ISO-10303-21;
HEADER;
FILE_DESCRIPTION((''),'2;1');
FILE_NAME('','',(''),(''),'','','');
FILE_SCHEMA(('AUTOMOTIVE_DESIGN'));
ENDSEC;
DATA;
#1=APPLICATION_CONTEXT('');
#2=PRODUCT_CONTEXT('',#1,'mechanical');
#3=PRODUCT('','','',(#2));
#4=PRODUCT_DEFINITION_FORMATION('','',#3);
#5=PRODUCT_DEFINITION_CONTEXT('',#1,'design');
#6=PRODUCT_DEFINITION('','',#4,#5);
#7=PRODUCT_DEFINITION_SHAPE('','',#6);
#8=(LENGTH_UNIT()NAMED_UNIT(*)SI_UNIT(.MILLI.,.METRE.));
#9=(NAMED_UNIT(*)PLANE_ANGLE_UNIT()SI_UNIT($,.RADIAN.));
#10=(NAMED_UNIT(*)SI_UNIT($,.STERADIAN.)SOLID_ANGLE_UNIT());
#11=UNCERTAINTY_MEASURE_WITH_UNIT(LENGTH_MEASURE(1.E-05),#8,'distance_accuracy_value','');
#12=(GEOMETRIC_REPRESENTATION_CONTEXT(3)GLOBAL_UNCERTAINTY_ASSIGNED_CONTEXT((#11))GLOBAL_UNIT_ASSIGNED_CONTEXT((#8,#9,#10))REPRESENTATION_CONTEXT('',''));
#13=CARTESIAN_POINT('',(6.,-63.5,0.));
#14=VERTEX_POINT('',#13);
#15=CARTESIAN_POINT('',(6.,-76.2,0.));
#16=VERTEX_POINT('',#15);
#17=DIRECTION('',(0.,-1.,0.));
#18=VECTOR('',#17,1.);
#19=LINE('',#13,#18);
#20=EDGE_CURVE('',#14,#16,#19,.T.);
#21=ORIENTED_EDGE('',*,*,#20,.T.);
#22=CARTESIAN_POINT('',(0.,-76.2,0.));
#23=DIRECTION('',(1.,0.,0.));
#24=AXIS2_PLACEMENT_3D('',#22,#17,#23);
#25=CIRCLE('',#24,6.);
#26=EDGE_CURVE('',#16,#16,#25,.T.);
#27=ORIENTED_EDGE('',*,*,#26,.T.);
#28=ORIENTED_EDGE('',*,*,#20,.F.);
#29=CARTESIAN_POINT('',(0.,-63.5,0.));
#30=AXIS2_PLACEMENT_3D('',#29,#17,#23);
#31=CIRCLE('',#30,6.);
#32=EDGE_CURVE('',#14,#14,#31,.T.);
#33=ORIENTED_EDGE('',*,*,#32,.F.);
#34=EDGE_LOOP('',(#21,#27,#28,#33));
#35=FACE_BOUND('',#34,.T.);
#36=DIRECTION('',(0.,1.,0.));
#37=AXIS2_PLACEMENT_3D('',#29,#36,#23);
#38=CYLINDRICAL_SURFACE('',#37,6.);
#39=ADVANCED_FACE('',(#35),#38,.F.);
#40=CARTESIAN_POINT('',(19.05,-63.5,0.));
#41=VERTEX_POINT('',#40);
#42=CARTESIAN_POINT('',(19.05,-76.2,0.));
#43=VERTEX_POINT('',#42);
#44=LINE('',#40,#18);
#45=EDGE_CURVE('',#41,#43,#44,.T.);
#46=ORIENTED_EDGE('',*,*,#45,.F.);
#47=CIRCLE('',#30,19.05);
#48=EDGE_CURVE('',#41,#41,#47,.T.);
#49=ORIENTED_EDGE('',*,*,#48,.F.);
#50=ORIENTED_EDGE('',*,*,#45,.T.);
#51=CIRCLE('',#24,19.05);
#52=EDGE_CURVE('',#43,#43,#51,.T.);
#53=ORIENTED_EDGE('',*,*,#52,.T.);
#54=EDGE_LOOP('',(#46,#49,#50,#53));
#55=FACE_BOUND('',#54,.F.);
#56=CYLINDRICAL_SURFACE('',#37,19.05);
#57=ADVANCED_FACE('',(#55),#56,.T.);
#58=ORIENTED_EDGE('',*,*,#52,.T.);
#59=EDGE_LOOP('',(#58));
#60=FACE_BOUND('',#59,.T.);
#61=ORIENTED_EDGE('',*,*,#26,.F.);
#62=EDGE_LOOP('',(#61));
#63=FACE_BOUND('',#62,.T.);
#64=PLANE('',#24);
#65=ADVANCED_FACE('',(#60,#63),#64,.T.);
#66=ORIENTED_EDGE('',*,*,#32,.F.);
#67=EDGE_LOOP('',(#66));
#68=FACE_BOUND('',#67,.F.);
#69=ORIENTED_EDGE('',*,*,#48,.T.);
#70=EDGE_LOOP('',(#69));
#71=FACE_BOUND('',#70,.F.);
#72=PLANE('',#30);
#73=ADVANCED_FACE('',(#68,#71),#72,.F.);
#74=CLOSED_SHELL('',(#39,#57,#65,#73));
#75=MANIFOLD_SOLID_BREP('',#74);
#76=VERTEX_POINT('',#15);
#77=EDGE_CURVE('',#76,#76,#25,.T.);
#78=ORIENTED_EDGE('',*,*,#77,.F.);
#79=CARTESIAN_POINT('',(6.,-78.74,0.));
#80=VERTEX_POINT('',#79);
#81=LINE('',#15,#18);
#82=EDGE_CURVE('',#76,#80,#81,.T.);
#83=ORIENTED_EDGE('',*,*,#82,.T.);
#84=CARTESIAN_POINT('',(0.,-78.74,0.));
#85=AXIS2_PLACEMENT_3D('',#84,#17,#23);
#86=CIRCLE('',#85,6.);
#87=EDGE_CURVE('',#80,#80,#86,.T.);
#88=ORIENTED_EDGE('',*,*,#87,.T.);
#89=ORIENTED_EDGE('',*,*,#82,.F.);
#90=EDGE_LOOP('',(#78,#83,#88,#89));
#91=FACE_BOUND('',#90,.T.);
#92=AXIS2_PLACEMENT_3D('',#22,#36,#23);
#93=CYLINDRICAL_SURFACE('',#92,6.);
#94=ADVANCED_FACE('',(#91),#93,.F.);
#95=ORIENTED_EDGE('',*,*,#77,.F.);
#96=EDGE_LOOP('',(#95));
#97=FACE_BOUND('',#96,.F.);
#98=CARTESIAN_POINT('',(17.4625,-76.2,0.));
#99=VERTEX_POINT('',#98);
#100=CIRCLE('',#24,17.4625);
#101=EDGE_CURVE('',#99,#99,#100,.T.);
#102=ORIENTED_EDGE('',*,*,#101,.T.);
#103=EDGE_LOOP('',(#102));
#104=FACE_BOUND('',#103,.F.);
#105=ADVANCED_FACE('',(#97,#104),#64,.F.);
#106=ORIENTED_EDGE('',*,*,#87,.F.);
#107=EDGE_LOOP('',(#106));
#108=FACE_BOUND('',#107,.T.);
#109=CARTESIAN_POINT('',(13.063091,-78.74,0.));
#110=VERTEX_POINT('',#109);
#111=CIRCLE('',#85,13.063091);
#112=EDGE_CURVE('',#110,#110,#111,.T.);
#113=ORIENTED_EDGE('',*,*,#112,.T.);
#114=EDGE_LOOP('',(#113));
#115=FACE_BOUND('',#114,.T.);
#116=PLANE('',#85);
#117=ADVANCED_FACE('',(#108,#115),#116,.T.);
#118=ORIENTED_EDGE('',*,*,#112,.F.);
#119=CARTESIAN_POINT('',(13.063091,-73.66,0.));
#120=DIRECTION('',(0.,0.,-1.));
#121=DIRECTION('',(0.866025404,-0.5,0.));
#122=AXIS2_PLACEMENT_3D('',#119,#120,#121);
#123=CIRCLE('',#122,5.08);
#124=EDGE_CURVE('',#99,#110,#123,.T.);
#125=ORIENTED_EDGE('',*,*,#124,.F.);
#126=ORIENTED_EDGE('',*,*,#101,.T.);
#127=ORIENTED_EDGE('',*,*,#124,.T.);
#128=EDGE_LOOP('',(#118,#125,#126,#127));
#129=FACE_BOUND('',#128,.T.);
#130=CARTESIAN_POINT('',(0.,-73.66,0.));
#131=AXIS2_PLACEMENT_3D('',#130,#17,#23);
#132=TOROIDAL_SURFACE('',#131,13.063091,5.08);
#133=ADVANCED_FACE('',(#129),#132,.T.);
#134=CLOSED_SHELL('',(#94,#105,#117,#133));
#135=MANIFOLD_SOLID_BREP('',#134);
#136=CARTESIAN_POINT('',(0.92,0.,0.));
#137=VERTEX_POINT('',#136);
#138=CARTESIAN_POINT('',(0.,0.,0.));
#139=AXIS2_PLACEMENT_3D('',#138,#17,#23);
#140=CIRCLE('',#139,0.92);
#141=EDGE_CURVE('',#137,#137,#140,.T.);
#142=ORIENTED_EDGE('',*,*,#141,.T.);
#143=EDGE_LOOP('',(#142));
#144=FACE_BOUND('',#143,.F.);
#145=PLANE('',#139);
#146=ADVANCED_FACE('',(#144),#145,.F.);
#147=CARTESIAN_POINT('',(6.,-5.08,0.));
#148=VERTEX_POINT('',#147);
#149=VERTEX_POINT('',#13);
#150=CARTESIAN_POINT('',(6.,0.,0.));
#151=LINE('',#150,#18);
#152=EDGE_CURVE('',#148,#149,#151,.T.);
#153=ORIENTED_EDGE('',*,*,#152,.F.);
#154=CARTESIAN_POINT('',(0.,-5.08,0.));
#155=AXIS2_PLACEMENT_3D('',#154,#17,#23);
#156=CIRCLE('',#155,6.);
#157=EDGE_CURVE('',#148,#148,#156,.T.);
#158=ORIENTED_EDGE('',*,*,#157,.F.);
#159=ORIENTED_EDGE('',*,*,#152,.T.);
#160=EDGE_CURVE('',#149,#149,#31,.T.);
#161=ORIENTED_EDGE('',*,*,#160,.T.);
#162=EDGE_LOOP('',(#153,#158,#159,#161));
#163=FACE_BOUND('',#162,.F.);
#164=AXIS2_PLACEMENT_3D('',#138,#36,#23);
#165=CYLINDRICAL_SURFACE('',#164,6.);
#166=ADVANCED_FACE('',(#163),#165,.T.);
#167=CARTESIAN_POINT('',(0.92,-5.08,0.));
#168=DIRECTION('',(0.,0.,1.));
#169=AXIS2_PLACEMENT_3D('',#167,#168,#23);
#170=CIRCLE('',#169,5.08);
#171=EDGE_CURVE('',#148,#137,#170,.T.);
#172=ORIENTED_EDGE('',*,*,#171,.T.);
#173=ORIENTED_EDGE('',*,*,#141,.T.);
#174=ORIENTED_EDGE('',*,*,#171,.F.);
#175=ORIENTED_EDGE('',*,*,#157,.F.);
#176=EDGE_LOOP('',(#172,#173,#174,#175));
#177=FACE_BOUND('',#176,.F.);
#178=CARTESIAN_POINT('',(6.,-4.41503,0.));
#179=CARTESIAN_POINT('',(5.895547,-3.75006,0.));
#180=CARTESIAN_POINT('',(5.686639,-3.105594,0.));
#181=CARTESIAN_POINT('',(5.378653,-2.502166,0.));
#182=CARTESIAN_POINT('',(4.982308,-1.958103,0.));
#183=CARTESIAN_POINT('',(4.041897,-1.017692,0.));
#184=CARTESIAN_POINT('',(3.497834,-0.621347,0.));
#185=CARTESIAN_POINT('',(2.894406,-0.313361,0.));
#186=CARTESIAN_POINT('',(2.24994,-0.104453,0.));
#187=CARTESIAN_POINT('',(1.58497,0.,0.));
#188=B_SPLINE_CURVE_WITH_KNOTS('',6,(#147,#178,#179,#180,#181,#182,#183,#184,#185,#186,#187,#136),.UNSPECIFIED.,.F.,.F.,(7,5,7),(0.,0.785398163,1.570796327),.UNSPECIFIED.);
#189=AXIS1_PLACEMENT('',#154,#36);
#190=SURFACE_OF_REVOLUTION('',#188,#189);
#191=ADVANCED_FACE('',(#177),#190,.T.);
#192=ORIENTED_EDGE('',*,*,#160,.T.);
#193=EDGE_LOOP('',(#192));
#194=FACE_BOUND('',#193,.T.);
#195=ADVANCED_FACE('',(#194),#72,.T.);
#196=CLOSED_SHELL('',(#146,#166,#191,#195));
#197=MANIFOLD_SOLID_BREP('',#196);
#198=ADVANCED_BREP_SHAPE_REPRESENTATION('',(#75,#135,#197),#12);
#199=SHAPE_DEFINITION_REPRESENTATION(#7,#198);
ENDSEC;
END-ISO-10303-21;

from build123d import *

# Parameters (mm, degrees)
F0_R     = 6
F1_DEPTH = 63.5
F2_R     = 19.05
F2_R_2   = 6
F3_DEPTH = 12.7
F4_R     = 17.4625
F4_R_2   = 6
F5_DEPTH = 2.54
F6_R     = 5.08


# Not quite as in the source:
# - a fillet or chamfer that OpenCascade refuses, or shapes differently, is made with other operations: its cross-section is extruded or revolved along the edge and cut away or added


with BuildPart() as f1:
    # F0 (on Front) → F1 (new body)
    with BuildSketch(Plane.XZ):
        Circle(F0_R)
    extrude(amount=F1_DEPTH)

    # F6
    f6_edges = [f1.edges().sort_by_distance(p)[0] for p in [
        (-6, 0, 0),
    ]]
    fillet(f6_edges, radius=F6_R)


with BuildPart() as f3:
    # F2 (on face) → F3 (new body)
    with BuildSketch(Plane.XZ.offset(63.5)):
        Circle(F2_R)
        Circle(F2_R_2, mode=Mode.SUBTRACT)
    extrude(amount=F3_DEPTH)


with BuildPart() as f5:
    # F4 (on face) → F5 (new body)
    with BuildSketch(Plane.XZ.offset(76.2)):
        Circle(F4_R)
        Circle(F4_R_2, mode=Mode.SUBTRACT)
    extrude(amount=F5_DEPTH)

    # F7: fillet of radius 5.08 on 1 edges, made by hand

    # F7_s1 → F7_t2 (revolve, cut)
    with BuildSketch(Plane.XY):
        with BuildLine():
            ThreePointArc((17.4625, -76.2), (15.6030909488, -78.0594090512), (13.0630909488, -78.74))
            Line((13.0630909488, -78.74), (17.4625, -78.74))
            Line((17.4625, -78.74), (17.4625, -76.2))
        make_face()
    revolve(axis=Axis((0, -78.74, 0), (0, -1, 0)), mode=Mode.SUBTRACT)


solid = Compound([f1.part, f3.part, f5.part])
